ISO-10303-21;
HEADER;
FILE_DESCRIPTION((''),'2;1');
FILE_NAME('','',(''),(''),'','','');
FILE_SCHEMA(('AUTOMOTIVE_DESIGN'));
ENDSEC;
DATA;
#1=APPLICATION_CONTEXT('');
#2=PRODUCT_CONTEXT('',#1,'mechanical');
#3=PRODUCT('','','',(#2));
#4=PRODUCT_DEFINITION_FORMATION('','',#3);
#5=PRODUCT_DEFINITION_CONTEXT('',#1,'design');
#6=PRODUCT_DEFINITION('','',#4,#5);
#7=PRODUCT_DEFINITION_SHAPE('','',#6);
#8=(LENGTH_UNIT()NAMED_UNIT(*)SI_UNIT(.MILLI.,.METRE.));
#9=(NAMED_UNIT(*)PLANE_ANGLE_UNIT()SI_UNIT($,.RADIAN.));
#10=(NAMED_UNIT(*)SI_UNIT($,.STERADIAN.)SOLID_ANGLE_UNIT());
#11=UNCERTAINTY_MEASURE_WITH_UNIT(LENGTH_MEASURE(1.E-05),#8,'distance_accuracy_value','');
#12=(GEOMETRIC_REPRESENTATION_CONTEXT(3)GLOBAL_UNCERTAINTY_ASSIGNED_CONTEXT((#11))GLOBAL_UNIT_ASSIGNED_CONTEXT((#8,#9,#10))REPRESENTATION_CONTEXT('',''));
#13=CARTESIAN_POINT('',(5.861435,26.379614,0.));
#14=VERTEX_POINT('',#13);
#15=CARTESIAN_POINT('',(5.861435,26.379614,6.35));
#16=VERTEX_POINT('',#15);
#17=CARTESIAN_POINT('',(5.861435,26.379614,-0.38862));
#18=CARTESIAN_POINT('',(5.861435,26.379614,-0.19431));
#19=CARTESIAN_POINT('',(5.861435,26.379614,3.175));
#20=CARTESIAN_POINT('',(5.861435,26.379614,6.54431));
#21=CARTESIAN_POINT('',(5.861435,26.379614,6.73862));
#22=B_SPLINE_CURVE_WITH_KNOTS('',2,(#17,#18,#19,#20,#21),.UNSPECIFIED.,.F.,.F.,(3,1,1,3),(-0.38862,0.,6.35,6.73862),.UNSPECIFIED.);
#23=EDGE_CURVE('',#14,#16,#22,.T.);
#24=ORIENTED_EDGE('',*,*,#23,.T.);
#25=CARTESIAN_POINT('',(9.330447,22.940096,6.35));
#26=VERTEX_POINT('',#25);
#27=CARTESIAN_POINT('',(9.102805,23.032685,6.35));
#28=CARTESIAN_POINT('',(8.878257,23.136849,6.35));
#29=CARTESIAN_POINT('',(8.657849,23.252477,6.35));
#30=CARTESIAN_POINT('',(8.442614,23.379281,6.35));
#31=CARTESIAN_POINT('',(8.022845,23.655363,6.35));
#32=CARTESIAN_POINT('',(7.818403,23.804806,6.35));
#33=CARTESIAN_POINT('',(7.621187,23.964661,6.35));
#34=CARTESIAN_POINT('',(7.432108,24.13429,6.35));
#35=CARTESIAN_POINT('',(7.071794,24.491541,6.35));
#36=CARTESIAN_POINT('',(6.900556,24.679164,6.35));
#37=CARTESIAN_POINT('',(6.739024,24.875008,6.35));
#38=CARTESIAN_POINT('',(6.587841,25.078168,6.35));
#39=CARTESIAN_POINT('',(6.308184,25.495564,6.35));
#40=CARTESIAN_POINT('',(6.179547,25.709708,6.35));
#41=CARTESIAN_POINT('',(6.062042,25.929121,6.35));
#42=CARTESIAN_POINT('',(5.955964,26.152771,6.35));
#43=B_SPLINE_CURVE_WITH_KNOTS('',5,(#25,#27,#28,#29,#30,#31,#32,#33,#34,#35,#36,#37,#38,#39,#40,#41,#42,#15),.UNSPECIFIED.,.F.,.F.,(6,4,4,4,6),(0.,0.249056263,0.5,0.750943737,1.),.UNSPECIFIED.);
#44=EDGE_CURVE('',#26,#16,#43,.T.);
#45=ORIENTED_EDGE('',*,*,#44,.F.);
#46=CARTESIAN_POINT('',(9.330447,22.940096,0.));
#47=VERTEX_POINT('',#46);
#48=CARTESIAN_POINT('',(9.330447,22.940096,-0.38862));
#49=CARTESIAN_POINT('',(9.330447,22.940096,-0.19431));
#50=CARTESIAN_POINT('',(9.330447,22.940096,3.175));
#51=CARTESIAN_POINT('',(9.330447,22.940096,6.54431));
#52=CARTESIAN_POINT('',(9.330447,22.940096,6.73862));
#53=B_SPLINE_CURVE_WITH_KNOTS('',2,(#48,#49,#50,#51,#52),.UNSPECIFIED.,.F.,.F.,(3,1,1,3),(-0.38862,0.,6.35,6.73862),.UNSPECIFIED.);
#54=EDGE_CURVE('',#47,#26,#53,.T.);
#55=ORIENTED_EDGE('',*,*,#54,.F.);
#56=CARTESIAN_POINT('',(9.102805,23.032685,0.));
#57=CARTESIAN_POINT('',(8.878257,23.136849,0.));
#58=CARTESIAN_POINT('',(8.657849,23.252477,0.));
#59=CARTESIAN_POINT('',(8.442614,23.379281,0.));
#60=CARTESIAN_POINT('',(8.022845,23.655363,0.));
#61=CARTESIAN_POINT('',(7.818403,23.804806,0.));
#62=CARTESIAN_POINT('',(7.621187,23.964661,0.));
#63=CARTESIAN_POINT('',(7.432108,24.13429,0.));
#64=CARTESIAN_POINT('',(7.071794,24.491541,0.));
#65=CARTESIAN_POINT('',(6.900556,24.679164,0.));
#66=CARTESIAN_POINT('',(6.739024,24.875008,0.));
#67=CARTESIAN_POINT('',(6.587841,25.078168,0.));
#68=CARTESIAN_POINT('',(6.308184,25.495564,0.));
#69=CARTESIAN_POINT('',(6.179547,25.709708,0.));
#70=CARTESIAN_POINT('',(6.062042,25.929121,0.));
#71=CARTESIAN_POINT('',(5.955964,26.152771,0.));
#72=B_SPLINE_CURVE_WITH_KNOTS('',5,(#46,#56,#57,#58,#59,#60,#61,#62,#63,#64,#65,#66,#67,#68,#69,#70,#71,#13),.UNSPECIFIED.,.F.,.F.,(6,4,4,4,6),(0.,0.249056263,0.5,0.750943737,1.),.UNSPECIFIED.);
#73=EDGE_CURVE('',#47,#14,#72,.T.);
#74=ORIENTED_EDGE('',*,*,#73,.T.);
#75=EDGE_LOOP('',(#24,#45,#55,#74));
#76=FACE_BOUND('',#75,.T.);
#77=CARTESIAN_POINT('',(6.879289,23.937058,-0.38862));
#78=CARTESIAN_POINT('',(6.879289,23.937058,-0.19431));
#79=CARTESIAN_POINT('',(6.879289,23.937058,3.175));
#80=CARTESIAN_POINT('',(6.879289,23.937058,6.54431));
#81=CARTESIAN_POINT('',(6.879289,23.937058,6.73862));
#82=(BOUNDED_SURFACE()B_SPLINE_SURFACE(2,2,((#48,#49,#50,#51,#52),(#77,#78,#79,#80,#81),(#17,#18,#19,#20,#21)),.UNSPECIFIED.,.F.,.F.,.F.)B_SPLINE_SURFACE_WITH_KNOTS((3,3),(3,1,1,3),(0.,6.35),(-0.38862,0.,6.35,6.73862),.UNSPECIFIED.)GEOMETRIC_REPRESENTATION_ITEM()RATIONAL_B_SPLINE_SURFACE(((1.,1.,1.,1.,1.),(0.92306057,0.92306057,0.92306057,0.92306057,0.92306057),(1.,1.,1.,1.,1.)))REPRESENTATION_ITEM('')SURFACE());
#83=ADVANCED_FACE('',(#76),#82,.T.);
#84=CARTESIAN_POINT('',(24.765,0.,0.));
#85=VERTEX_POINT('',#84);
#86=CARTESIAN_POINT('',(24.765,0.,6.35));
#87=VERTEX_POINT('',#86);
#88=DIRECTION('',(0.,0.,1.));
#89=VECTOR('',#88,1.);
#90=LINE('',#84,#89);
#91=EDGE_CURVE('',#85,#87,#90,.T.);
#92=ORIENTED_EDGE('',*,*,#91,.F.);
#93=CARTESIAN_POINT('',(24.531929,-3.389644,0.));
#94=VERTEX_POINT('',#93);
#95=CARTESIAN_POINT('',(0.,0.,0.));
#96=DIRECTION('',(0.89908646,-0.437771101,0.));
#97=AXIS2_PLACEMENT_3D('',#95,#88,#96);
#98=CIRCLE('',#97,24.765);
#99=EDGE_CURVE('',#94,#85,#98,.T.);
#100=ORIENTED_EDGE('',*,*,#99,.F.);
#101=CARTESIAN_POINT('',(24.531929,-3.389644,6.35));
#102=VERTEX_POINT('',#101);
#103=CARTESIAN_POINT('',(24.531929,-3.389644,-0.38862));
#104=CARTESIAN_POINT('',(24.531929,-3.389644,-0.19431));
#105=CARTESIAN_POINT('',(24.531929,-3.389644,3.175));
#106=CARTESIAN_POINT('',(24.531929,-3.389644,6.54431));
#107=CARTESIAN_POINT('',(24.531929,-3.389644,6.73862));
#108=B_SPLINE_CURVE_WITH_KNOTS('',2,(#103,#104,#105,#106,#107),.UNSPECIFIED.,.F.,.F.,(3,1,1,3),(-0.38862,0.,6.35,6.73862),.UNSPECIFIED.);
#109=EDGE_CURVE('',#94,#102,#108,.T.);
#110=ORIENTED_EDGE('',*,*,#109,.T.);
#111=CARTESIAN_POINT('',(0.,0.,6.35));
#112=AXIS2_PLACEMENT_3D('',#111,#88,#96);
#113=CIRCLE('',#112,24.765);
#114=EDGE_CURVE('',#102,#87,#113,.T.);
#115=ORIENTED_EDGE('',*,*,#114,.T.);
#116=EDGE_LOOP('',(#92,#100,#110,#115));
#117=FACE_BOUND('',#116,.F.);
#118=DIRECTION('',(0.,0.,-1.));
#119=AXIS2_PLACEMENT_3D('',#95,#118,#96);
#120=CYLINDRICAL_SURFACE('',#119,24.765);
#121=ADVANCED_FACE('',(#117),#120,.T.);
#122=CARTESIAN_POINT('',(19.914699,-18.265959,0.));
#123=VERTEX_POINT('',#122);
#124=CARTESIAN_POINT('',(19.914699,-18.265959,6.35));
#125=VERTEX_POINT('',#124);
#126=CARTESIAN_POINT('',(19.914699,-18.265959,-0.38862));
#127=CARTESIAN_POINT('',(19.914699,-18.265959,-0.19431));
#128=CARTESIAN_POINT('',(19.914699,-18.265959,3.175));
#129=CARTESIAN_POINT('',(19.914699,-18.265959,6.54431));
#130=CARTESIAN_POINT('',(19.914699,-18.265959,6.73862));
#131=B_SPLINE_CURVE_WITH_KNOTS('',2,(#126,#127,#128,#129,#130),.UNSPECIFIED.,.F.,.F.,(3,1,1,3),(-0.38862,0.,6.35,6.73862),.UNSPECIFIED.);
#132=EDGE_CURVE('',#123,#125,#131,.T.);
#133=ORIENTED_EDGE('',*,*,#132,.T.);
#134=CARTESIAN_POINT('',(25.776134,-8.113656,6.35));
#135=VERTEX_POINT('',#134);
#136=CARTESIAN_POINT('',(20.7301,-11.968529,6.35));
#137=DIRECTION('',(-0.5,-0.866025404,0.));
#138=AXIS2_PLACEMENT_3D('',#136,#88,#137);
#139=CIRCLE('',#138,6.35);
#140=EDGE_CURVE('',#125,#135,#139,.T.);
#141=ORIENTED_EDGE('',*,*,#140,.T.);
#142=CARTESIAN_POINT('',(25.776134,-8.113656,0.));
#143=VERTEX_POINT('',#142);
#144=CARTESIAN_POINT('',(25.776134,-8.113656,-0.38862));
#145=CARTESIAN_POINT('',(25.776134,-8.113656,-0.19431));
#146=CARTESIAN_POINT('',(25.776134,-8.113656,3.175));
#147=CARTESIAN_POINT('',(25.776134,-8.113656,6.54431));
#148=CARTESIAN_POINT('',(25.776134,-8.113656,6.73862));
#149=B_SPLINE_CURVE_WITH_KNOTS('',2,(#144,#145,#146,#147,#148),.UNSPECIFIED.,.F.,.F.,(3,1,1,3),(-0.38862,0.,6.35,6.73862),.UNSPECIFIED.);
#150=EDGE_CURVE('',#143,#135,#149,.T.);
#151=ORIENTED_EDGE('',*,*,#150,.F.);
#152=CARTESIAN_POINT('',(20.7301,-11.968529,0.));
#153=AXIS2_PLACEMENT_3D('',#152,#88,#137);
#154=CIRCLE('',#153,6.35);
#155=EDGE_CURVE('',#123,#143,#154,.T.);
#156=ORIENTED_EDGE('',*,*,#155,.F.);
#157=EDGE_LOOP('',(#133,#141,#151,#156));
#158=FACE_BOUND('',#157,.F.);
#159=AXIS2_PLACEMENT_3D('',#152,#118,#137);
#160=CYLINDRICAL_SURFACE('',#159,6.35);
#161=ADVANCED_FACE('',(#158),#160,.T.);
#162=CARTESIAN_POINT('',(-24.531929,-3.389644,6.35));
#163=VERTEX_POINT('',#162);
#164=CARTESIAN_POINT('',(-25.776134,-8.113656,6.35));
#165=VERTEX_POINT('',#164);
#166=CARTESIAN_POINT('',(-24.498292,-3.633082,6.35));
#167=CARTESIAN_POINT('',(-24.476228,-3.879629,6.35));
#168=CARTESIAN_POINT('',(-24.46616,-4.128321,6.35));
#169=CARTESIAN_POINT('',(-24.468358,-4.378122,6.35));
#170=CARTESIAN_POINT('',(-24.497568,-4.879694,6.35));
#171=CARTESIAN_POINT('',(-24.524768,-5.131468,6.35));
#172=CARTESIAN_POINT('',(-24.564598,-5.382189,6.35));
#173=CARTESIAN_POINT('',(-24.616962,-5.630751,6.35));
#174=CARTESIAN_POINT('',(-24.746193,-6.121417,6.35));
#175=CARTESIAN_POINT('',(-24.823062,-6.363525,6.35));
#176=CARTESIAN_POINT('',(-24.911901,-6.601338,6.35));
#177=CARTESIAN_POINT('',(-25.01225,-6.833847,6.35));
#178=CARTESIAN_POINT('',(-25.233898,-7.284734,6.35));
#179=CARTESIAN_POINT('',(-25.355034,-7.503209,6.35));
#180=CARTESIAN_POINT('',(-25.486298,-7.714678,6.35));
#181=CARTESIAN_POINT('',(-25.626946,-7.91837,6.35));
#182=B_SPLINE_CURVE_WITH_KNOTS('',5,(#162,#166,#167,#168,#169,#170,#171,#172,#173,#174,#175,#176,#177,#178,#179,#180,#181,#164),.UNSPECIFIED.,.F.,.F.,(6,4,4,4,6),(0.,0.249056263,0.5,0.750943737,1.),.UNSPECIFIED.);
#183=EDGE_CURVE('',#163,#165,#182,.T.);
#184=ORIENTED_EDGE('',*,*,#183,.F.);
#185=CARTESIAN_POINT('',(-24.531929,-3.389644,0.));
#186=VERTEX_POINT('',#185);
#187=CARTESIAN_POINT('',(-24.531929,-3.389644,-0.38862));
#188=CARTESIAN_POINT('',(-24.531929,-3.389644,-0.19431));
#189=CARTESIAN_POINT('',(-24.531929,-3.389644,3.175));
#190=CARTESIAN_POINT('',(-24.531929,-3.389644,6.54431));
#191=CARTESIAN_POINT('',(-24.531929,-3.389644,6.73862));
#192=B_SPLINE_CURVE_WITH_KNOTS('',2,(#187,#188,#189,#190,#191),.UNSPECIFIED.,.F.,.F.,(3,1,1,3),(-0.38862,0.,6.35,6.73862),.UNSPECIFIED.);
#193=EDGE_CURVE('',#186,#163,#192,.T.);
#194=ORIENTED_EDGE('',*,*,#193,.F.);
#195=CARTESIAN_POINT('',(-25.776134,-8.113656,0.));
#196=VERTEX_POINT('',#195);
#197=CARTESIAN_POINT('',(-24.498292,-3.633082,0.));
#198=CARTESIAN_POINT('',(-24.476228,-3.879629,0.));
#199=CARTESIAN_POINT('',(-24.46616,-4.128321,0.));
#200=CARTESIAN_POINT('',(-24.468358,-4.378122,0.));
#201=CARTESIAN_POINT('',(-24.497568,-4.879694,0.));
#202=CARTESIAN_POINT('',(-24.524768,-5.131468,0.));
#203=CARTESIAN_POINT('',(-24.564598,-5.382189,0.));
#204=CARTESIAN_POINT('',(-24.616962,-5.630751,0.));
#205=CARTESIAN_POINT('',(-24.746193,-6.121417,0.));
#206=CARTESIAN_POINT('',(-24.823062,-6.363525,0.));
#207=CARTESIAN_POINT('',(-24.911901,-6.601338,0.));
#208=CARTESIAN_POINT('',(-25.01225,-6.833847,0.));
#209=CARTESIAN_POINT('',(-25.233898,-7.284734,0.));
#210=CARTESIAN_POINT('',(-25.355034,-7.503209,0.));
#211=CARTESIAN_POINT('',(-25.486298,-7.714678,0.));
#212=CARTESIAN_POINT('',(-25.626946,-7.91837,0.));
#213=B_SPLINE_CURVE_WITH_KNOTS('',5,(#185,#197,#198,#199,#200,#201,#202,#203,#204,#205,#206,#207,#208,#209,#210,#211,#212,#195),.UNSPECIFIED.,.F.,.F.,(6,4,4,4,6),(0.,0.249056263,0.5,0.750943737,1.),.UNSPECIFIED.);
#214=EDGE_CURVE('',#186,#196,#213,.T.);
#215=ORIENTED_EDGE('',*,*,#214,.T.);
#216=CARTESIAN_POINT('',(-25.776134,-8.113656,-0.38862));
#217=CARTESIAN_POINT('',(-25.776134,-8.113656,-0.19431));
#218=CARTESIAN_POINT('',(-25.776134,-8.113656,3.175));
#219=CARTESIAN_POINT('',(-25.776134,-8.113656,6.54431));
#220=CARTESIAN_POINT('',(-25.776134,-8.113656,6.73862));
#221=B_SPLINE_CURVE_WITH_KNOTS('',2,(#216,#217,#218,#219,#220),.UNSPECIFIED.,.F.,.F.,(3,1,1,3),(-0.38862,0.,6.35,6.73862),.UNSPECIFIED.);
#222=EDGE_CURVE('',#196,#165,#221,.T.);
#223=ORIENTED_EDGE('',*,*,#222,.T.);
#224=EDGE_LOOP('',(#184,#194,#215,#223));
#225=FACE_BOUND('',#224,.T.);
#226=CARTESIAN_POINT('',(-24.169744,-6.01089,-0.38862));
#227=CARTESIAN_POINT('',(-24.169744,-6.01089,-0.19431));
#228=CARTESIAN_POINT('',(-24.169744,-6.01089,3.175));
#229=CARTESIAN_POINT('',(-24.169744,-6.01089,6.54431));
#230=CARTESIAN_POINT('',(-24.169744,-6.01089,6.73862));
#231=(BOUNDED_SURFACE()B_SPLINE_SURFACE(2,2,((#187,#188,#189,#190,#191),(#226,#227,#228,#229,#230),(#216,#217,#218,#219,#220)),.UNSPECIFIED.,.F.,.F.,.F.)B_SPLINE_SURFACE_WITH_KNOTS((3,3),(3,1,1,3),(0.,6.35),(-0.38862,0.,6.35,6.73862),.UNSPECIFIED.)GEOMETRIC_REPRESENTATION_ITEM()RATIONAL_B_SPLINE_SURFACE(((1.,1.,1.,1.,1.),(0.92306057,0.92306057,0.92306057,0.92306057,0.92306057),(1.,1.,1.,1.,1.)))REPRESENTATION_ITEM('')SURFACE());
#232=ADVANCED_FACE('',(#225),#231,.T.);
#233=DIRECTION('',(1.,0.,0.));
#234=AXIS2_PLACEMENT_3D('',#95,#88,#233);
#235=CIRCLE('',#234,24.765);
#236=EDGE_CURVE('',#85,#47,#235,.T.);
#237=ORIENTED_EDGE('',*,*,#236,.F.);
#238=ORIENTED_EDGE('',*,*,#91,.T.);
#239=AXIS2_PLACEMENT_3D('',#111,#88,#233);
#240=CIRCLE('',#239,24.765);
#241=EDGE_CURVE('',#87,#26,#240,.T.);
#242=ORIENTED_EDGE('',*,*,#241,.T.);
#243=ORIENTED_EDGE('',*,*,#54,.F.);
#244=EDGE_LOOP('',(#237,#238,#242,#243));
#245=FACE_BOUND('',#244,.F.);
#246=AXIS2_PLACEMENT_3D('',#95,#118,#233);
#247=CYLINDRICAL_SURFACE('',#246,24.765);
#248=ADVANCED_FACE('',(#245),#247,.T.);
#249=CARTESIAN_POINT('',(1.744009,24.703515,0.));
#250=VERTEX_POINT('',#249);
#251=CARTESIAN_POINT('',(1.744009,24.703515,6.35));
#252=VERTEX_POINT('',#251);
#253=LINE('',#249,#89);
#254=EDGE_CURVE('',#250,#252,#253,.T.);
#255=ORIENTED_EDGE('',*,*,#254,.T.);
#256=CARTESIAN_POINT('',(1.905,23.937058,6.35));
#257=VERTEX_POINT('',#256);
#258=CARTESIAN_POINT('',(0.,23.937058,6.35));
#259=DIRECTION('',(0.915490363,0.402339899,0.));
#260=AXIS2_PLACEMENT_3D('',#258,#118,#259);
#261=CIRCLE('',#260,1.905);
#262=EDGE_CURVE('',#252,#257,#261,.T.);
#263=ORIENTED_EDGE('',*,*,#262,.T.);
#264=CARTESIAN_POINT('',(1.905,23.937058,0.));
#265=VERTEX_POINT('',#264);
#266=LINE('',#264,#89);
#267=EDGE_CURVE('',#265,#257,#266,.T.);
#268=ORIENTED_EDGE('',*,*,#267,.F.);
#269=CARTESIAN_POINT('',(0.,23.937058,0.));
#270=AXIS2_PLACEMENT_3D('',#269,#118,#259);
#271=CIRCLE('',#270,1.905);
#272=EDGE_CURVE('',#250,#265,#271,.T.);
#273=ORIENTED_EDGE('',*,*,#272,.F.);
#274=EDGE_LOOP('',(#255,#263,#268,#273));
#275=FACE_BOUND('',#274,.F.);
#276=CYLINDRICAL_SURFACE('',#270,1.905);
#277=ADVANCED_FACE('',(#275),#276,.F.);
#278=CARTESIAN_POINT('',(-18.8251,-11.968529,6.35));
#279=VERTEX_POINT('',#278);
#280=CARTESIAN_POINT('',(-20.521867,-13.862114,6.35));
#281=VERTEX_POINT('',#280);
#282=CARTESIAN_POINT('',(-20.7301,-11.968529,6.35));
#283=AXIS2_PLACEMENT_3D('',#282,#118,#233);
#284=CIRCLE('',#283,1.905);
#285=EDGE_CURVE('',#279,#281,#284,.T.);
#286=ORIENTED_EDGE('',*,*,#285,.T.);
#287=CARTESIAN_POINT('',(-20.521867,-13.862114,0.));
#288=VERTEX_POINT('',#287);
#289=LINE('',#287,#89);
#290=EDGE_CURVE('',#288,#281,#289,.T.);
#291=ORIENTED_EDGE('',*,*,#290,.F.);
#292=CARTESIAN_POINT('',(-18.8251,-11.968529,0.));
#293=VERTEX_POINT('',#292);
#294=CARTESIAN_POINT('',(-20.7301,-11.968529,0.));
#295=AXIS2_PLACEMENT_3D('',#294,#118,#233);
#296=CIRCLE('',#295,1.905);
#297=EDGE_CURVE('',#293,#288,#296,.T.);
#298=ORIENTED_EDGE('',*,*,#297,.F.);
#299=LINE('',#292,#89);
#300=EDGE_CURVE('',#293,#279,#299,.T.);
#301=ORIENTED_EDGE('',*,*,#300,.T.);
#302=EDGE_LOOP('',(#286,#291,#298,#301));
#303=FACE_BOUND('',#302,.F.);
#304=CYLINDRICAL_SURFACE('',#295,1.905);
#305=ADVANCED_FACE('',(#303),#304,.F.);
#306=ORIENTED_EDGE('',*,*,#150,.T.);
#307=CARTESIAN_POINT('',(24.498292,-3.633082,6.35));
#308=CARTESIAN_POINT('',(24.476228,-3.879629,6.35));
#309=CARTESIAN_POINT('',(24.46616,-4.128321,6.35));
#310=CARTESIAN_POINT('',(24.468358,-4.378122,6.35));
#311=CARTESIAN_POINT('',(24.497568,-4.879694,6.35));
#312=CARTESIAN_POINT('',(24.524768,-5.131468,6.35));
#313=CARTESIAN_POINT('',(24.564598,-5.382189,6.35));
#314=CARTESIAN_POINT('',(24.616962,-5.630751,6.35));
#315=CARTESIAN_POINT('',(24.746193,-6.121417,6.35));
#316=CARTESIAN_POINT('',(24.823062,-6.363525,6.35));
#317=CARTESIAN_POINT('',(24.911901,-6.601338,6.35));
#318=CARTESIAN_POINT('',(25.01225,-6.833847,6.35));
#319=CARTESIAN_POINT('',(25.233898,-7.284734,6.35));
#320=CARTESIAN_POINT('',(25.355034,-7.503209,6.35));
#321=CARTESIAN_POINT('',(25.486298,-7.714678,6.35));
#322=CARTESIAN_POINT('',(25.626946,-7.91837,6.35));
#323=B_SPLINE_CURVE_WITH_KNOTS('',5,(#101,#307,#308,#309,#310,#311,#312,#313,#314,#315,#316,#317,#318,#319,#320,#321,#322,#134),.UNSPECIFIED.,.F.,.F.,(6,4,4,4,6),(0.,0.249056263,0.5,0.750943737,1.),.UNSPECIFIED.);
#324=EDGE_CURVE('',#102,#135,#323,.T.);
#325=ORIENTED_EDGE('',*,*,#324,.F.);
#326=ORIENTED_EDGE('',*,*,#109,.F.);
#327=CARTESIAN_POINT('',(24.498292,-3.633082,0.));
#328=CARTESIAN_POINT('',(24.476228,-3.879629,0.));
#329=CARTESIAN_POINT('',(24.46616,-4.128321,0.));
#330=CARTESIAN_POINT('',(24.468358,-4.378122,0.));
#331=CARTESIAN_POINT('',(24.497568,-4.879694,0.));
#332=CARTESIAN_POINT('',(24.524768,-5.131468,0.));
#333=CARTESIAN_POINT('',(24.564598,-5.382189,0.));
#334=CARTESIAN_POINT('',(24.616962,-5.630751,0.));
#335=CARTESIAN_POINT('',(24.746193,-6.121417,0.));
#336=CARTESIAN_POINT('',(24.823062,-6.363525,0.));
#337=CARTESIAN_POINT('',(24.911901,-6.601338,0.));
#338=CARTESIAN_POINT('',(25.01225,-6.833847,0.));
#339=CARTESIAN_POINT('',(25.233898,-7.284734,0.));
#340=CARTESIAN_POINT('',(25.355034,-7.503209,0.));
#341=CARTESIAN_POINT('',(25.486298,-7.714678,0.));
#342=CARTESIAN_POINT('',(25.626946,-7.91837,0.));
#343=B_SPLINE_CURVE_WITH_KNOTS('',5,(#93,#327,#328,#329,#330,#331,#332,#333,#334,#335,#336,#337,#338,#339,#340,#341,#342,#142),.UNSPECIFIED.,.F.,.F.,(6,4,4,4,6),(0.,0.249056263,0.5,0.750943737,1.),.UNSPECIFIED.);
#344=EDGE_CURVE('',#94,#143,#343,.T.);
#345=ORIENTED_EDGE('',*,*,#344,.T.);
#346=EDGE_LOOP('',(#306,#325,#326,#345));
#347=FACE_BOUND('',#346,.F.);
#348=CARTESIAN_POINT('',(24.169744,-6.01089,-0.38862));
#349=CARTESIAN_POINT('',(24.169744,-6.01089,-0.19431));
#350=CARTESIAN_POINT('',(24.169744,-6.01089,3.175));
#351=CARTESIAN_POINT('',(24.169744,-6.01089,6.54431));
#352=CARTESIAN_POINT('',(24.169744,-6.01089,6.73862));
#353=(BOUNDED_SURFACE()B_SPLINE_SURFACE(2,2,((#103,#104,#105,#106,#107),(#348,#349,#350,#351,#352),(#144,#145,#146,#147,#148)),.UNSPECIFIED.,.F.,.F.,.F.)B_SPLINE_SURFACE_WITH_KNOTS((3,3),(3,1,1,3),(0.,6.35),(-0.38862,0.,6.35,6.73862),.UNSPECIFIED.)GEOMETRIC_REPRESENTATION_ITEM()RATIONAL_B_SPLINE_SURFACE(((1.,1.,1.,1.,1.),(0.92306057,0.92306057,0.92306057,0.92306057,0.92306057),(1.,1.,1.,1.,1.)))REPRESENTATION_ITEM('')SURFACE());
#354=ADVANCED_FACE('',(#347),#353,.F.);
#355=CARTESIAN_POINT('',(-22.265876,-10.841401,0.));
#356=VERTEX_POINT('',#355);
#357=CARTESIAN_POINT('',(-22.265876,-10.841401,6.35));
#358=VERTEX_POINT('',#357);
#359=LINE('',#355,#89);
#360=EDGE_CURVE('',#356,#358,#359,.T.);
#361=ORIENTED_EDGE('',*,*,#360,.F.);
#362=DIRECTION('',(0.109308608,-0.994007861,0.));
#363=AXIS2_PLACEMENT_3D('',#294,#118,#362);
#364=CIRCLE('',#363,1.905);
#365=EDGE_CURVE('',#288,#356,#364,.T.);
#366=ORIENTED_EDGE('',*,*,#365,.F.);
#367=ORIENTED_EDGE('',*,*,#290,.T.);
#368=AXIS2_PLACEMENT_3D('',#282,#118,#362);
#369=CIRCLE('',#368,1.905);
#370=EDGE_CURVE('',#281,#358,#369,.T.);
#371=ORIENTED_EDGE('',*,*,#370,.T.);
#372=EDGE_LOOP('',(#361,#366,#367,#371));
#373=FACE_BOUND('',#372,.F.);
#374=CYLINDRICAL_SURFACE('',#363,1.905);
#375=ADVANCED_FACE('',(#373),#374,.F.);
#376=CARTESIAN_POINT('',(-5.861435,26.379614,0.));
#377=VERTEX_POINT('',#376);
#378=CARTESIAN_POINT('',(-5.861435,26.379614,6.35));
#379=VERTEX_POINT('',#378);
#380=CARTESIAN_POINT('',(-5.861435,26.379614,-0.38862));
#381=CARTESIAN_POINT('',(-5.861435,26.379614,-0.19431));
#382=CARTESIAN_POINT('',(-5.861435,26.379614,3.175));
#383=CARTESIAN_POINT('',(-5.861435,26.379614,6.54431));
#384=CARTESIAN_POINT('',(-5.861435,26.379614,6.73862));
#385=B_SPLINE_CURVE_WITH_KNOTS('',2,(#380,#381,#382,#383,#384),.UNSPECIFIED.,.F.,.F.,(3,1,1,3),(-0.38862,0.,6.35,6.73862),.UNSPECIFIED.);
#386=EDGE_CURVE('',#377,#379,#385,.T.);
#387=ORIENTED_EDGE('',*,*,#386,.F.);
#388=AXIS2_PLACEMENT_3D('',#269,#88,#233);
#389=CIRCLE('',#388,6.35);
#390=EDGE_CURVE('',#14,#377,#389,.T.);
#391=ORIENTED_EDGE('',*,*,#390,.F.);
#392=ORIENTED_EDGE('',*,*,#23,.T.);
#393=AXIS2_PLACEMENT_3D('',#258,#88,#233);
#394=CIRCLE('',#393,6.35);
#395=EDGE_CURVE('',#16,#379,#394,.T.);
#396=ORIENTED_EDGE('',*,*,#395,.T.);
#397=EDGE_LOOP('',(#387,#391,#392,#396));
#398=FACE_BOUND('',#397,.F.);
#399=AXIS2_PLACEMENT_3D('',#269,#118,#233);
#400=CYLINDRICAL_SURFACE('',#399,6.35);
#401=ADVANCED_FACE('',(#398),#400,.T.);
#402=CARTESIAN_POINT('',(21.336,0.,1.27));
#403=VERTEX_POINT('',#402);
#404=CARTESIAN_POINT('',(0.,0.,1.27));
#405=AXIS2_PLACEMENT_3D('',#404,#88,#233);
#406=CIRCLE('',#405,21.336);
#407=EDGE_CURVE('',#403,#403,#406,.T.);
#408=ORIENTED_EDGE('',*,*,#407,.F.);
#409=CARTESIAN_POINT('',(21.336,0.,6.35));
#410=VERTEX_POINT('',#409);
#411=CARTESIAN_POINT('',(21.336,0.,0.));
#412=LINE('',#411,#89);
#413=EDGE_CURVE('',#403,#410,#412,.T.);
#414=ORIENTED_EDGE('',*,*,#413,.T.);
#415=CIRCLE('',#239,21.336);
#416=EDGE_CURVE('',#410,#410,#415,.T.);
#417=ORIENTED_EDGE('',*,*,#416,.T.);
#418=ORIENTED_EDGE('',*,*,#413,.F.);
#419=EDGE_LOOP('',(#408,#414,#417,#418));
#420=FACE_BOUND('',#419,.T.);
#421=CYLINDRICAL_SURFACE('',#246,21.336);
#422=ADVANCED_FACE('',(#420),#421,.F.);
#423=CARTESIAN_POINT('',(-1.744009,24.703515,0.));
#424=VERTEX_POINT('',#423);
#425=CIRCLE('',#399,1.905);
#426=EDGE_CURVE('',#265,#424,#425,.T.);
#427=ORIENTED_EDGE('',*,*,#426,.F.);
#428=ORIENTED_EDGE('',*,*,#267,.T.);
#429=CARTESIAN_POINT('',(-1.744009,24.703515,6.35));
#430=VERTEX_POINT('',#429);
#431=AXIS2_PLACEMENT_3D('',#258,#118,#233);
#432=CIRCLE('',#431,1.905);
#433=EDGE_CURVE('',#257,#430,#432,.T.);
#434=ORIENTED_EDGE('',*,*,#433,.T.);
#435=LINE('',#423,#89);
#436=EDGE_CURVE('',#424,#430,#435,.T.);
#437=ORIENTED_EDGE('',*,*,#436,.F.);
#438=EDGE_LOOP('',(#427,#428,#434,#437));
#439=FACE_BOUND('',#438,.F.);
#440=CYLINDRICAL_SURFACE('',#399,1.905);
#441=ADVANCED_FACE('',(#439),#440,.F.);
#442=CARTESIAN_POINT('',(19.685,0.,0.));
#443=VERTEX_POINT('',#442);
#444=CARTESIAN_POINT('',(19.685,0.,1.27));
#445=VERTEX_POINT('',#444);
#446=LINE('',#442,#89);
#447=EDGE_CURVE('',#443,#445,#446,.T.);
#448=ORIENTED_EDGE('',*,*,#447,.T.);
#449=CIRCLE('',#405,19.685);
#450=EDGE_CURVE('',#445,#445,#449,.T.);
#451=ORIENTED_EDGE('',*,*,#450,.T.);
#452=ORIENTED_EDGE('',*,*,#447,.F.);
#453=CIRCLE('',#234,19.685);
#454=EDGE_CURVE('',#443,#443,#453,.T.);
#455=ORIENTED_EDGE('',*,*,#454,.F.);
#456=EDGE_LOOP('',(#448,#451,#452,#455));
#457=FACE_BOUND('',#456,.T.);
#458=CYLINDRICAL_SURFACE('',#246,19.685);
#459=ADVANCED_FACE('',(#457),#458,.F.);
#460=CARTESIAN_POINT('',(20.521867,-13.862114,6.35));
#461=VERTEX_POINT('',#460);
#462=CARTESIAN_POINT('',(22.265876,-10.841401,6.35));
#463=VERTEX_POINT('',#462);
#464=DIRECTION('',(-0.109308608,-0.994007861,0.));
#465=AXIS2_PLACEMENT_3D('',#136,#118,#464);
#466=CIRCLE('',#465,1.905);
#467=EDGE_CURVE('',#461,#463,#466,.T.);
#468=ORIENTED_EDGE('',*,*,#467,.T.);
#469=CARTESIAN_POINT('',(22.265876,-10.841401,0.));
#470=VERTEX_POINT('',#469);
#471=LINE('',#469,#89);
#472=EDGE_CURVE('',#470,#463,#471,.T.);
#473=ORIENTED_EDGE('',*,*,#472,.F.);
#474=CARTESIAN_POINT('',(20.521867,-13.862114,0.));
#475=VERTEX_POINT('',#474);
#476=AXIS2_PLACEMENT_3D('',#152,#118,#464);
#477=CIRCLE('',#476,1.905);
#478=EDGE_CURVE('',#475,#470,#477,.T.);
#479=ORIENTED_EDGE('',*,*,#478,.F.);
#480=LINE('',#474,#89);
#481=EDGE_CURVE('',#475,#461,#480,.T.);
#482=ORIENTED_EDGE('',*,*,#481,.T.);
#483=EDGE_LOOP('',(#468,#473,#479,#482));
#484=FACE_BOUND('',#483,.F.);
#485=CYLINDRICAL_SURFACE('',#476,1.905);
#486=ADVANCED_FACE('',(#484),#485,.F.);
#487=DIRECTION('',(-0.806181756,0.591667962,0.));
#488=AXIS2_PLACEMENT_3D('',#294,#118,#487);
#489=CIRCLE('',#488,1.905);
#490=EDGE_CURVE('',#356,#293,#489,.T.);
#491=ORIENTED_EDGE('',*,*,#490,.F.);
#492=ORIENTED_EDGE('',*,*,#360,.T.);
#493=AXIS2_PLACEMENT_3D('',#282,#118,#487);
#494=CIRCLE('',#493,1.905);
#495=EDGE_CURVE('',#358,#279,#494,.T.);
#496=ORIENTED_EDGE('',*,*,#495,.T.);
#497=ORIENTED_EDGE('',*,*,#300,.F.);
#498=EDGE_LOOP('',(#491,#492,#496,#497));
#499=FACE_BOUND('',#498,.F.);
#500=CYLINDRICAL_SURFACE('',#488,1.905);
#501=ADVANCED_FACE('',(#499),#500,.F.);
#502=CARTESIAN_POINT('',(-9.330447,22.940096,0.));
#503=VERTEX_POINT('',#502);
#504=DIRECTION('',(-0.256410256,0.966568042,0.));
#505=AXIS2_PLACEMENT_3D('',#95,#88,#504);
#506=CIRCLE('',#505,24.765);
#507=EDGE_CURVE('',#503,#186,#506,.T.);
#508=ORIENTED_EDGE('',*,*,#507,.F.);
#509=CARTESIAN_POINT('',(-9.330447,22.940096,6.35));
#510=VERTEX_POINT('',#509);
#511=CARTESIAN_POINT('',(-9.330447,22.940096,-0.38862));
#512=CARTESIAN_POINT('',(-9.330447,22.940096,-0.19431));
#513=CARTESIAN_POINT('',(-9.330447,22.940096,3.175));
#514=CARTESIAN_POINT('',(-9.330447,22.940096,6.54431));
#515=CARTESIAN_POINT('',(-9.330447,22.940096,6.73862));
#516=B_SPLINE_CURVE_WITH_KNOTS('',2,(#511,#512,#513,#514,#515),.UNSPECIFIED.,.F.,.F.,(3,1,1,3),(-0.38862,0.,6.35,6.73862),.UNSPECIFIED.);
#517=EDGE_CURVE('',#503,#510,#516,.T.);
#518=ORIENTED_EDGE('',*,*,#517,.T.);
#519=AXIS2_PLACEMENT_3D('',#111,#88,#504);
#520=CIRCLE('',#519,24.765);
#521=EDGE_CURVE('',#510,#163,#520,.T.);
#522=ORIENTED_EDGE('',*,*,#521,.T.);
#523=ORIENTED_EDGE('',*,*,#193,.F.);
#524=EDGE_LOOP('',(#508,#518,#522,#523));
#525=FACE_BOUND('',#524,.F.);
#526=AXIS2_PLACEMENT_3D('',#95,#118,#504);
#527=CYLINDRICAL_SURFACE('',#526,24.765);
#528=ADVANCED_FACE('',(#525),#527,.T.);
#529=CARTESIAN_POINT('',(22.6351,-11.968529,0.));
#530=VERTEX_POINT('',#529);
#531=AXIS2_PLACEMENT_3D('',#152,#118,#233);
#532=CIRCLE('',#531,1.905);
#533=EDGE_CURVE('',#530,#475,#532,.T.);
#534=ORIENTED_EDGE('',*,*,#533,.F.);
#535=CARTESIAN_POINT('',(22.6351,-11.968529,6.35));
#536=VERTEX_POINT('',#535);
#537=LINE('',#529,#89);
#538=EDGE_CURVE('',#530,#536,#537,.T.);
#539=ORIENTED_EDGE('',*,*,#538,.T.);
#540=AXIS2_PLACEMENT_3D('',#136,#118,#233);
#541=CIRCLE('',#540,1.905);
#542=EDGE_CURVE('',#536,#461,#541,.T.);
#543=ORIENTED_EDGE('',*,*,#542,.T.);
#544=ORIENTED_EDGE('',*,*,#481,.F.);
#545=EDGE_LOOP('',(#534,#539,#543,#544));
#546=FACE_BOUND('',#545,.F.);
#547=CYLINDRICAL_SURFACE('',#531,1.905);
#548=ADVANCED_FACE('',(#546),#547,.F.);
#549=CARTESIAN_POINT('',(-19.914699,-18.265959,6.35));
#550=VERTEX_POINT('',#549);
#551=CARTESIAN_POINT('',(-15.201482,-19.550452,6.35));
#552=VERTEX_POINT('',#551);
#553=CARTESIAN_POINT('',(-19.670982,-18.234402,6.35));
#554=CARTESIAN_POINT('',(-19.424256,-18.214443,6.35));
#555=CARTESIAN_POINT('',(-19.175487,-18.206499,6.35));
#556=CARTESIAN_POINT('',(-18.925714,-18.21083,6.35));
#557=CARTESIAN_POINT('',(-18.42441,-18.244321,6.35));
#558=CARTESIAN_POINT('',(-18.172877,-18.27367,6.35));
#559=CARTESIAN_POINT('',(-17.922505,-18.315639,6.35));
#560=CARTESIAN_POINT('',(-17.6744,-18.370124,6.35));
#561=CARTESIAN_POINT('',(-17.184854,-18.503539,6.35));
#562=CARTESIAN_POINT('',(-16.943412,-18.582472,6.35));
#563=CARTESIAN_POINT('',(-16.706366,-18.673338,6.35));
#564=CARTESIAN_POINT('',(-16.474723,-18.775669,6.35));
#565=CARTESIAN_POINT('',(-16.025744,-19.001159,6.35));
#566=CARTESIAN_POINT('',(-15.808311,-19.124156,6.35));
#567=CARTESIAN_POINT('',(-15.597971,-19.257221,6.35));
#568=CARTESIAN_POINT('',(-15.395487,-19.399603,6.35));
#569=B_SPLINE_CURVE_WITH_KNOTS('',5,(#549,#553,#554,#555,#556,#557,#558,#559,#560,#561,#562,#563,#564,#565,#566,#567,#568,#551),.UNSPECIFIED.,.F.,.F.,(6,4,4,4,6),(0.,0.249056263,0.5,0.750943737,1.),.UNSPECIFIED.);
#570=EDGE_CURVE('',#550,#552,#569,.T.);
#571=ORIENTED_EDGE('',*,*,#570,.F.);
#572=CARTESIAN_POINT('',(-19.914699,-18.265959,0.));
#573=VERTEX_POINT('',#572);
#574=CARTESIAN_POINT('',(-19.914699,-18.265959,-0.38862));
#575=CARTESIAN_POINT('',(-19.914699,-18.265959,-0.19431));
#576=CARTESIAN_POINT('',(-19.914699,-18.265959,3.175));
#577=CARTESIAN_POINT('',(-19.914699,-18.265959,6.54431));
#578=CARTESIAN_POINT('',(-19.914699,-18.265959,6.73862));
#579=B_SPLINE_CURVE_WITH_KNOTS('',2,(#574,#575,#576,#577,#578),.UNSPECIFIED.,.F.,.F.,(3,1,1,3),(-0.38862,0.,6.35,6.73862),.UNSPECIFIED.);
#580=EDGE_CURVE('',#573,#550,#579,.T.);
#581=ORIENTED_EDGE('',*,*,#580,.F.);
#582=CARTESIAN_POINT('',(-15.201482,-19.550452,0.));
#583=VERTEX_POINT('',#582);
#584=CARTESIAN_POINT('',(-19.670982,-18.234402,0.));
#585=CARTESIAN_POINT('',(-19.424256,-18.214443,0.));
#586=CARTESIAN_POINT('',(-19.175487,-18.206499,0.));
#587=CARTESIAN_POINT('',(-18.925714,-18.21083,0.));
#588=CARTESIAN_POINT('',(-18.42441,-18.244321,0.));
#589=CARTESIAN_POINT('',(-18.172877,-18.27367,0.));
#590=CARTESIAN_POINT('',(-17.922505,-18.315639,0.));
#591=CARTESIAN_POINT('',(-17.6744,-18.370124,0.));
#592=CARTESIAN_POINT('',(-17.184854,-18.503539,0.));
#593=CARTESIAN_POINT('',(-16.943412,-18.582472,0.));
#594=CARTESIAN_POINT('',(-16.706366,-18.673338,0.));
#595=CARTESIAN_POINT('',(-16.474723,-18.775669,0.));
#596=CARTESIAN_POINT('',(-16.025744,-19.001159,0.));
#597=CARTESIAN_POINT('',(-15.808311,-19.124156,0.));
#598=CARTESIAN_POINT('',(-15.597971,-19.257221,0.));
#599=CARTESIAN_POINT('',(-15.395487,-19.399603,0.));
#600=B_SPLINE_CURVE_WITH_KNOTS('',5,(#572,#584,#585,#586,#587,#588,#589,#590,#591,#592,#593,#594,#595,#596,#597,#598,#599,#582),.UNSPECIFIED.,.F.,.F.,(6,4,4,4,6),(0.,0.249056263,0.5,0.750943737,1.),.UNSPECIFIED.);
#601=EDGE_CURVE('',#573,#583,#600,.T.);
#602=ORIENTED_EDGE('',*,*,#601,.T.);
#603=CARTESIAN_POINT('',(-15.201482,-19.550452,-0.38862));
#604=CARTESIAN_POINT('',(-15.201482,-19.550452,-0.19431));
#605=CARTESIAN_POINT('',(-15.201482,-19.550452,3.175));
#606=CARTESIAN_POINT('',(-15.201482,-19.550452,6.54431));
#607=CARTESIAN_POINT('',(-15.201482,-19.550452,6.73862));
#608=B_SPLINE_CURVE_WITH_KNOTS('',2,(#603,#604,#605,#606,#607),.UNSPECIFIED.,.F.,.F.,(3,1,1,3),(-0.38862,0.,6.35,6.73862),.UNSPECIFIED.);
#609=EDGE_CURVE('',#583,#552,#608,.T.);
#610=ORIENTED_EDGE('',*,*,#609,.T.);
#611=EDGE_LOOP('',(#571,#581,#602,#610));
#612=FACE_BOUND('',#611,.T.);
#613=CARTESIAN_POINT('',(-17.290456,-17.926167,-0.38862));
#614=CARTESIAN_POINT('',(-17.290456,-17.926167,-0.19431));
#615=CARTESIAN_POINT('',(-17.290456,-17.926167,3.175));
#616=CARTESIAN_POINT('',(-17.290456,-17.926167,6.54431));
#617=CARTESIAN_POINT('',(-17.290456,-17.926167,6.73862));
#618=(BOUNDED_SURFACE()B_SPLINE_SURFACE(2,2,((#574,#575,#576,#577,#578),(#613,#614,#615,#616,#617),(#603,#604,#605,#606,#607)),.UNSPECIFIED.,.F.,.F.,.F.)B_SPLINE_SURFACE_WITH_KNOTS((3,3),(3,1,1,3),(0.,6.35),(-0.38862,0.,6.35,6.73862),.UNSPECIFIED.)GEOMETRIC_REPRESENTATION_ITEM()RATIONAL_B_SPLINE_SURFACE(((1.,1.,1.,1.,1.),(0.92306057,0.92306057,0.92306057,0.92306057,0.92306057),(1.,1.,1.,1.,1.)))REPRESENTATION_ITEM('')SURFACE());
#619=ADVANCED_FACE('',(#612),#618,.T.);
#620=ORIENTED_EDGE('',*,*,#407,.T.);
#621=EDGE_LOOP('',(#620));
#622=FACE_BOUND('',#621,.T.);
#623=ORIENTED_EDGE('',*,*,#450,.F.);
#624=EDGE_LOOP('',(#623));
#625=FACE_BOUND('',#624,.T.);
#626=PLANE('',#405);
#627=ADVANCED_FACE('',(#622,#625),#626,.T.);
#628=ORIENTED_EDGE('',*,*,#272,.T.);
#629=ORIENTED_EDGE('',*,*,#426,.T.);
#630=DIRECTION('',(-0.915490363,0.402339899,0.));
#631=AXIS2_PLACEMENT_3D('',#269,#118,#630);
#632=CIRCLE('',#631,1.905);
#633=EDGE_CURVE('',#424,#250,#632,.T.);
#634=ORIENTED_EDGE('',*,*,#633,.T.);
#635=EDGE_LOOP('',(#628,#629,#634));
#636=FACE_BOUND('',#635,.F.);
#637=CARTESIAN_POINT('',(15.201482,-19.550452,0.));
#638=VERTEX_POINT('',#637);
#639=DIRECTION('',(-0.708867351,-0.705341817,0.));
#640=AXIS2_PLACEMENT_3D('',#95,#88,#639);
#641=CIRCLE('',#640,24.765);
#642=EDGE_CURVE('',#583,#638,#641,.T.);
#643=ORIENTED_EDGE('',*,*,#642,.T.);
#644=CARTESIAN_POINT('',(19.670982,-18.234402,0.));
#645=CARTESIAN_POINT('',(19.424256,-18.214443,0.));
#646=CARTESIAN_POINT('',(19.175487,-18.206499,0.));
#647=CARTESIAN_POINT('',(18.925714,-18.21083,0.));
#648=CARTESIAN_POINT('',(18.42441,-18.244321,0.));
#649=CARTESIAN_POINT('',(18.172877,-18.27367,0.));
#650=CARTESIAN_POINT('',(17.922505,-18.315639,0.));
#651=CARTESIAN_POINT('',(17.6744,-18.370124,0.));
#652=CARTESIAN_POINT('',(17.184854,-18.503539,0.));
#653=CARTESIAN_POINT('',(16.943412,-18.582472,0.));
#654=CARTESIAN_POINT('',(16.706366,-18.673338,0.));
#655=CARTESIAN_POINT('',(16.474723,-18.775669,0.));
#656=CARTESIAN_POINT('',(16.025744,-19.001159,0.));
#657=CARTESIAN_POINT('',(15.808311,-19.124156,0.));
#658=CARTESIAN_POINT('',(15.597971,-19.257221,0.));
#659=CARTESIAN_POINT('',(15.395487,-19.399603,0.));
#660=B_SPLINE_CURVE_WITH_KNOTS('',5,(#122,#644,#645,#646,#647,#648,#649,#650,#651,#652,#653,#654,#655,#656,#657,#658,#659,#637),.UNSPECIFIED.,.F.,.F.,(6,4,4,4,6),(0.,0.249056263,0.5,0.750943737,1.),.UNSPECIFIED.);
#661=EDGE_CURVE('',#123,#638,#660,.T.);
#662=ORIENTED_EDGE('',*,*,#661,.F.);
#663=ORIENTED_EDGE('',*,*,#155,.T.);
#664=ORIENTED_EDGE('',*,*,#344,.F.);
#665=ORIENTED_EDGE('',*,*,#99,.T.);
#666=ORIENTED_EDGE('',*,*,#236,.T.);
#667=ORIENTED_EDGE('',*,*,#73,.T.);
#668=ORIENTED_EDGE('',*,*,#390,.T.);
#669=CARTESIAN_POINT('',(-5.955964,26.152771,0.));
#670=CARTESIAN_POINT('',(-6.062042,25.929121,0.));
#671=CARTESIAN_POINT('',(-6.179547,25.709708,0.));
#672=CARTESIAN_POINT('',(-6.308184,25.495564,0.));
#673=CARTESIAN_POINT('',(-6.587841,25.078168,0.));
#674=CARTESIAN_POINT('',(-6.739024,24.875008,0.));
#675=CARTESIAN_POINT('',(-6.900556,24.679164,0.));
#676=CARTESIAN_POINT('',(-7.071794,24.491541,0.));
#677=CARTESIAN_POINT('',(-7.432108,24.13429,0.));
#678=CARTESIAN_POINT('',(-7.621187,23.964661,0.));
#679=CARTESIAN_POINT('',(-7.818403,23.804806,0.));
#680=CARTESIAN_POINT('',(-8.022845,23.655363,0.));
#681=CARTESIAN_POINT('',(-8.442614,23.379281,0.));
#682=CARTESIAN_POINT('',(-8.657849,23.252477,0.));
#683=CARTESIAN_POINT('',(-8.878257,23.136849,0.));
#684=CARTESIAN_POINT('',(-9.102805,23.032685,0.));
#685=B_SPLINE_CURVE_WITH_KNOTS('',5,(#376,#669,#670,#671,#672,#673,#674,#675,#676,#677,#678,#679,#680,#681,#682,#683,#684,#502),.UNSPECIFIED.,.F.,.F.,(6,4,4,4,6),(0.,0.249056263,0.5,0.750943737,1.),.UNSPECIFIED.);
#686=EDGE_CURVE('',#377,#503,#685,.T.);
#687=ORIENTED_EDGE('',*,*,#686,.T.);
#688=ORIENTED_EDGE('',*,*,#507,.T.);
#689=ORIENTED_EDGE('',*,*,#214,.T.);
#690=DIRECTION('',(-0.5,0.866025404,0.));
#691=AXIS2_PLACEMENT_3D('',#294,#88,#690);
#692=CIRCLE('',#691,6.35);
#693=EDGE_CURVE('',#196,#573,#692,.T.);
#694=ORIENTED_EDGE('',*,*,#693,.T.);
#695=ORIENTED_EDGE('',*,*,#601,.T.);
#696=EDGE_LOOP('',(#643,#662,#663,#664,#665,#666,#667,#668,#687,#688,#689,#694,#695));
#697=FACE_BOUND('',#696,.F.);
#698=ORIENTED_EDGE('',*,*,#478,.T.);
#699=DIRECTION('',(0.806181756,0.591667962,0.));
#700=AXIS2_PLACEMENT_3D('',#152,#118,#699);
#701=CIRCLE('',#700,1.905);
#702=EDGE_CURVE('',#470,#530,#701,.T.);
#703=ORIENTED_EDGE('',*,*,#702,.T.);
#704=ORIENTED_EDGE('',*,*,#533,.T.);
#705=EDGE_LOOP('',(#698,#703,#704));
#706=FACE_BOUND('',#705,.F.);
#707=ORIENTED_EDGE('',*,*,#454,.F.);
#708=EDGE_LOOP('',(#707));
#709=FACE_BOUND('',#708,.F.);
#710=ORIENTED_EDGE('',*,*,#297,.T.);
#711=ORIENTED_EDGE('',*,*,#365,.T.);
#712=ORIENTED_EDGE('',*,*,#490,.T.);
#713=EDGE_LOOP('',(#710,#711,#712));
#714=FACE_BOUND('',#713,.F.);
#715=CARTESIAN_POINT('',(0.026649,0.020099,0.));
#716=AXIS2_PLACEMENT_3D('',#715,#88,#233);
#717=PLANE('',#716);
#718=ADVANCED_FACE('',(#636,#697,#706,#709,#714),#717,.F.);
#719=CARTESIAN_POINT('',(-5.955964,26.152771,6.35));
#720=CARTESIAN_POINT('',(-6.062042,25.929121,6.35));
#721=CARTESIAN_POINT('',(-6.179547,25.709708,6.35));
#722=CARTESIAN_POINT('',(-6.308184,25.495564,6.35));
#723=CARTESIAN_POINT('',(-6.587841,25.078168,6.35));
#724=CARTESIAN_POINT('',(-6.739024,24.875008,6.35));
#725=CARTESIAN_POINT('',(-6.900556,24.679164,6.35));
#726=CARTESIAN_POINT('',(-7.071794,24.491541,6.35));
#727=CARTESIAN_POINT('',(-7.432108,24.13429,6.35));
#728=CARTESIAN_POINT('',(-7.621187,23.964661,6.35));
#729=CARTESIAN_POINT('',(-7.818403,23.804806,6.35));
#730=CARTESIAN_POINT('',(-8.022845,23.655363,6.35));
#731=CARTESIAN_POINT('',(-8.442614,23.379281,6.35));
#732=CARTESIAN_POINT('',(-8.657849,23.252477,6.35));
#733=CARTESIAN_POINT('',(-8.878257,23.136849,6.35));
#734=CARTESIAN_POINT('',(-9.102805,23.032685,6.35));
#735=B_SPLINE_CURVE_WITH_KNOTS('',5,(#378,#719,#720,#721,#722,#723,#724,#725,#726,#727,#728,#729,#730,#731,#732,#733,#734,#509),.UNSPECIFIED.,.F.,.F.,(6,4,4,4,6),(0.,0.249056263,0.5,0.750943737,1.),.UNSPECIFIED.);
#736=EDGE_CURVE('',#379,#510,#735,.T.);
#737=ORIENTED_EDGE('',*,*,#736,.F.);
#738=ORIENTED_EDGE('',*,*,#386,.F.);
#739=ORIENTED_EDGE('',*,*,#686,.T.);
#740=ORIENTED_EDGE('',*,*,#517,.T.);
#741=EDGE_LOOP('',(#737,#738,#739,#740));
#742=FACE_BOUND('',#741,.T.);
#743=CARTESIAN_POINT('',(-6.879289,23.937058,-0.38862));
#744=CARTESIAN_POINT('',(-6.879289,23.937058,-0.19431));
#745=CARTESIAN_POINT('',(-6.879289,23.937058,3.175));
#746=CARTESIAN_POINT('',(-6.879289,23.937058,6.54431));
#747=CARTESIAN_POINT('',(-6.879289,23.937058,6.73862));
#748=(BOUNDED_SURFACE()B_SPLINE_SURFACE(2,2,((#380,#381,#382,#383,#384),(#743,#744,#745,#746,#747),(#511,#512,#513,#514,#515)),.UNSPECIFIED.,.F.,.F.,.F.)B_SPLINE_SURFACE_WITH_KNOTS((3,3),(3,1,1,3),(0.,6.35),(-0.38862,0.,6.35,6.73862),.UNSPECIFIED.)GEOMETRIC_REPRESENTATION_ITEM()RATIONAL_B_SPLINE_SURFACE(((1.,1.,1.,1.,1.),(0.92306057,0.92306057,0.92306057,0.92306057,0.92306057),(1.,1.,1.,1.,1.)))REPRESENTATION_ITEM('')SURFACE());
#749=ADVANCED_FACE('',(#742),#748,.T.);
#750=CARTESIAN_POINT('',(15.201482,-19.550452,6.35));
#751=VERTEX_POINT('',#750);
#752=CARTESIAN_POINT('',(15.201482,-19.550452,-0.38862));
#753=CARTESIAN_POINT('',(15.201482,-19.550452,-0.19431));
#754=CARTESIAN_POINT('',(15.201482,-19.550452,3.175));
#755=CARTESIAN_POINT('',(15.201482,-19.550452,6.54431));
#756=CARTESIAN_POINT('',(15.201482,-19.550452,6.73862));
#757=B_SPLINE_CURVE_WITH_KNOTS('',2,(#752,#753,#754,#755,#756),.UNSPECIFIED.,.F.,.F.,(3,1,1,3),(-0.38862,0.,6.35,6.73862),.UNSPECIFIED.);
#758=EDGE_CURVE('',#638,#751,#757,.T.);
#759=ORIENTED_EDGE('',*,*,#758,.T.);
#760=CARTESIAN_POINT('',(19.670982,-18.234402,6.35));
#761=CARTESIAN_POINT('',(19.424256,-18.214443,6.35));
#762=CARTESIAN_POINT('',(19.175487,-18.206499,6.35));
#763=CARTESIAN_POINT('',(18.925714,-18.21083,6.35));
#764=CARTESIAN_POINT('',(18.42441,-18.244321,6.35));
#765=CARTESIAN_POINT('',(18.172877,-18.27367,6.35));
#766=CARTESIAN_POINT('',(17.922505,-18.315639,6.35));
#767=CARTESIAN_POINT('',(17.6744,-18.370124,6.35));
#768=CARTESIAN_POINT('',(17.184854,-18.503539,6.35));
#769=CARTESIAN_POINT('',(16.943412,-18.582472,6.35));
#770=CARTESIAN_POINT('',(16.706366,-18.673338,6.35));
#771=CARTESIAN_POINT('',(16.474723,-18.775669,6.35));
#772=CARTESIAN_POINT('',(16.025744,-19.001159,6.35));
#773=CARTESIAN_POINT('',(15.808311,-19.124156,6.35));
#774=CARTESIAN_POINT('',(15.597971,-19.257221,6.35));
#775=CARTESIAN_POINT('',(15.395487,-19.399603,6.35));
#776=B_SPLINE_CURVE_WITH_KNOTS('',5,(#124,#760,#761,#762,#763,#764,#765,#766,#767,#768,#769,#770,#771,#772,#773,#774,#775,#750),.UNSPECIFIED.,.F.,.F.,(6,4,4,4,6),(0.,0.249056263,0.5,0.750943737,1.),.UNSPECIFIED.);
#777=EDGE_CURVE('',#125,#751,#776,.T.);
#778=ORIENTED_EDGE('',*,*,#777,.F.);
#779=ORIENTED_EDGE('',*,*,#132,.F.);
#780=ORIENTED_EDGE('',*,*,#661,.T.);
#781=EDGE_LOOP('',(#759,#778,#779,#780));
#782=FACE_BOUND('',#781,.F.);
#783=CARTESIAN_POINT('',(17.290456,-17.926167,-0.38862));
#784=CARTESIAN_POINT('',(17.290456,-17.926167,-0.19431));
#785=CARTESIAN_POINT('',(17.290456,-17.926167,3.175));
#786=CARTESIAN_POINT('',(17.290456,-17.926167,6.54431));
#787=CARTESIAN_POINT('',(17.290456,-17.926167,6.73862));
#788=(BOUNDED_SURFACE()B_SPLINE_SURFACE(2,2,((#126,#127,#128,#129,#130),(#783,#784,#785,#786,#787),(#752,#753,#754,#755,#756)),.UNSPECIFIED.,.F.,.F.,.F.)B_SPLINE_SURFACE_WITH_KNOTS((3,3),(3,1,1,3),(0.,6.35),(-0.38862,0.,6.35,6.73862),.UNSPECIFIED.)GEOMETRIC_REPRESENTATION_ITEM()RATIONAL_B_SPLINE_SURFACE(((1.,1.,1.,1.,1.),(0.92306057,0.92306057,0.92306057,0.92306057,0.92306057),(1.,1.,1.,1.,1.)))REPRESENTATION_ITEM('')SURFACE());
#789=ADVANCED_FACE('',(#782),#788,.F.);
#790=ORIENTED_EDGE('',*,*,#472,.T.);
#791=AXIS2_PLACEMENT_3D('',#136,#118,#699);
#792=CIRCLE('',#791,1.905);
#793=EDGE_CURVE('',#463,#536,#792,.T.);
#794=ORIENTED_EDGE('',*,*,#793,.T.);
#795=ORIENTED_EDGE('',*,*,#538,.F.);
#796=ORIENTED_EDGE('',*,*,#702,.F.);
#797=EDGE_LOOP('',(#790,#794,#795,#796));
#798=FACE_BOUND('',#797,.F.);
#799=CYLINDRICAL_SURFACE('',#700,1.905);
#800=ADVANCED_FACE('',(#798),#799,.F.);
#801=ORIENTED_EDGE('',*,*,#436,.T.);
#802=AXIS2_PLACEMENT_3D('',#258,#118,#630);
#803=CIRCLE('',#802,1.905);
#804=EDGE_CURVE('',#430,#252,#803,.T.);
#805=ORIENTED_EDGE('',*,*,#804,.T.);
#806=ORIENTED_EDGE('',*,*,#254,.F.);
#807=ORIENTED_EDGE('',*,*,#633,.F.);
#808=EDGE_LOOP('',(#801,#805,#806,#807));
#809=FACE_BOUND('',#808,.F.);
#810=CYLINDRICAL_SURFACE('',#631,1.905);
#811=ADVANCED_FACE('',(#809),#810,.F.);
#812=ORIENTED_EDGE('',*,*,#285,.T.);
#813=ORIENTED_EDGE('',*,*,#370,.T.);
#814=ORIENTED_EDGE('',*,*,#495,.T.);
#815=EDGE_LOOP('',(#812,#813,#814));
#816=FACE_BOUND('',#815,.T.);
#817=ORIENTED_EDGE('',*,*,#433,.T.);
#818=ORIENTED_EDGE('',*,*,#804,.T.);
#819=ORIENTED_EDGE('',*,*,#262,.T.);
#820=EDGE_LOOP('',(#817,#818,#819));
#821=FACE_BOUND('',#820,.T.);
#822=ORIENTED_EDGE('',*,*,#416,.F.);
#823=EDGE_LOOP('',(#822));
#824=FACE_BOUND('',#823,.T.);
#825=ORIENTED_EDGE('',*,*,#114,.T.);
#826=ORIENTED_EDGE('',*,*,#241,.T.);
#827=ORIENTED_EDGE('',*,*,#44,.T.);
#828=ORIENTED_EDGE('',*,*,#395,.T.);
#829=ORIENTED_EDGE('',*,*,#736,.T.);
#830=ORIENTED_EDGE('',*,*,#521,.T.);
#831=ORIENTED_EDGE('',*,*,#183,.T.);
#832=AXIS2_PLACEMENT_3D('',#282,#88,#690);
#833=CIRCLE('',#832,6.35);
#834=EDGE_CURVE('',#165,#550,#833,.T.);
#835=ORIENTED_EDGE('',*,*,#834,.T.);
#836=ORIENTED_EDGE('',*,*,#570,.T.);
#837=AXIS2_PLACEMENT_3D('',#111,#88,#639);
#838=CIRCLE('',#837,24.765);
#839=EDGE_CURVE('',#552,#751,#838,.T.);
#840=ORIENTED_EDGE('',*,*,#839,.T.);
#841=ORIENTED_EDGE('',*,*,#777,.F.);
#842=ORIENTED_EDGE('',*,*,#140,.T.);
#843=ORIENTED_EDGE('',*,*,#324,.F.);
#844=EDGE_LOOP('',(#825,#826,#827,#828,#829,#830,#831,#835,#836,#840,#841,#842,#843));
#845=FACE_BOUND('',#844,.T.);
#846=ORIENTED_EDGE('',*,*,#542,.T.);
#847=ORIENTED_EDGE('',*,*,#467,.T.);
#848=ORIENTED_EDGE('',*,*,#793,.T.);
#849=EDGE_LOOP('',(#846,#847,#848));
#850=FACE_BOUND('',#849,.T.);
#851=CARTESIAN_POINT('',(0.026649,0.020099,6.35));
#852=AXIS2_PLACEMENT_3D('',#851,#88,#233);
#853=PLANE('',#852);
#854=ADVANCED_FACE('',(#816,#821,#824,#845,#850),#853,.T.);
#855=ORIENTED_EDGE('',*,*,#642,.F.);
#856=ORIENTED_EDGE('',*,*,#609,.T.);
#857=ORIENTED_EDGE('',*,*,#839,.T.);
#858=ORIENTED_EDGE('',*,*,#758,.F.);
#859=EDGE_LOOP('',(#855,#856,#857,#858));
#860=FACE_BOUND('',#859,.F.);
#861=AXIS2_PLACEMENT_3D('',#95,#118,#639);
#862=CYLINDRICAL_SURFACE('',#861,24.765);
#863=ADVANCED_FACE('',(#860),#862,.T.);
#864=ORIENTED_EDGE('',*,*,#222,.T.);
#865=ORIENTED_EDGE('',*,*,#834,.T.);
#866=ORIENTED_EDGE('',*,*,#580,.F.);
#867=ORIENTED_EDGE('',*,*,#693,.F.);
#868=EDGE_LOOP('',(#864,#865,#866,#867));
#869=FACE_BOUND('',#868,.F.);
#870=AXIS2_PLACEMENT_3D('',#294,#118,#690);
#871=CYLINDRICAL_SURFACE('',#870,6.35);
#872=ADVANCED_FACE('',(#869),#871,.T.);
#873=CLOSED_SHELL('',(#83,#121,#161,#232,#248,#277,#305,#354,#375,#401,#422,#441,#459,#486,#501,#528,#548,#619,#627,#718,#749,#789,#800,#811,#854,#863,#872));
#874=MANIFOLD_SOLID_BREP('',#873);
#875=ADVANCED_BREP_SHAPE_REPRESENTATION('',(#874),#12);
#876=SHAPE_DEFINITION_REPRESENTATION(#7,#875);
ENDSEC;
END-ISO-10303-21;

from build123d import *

# Parameters (mm, degrees)
F0_R     = 21.336
F0_R_2   = 19.685
F1_DEPTH = 1.27
F2_DEPTH = 6.35
F3_R     = 6.35


with BuildPart() as f1:
    # F0 (on Top) → F1 (new body)
    with BuildSketch(Plane.XY):
        Circle(F0_R)
        Circle(F0_R_2, mode=Mode.SUBTRACT)
    extrude(amount=F1_DEPTH)

    # F0 (on Top) → F2 (join)
    with BuildSketch(Plane.XY):
        with BuildLine():
            ThreePointArc((23.9050999455, -6.4692674698), (24.5490837421, -3.2630832697), (24.765, 0))
            ThreePointArc((24.765, 0), (19.6285885254, 15.1004548773), (6.35, 23.9370575677))
            ThreePointArc((6.35, 23.9370575677), (4.0651088886, 24.4290833787), (1.7440091422, 24.703515076))
            ThreePointArc((1.7440091422, 24.703515076), (1.8643178935, 24.3286489263), (1.905, 23.9370575677))
            ThreePointArc((1.905, 23.9370575677), (-0.3915913586, 22.0727396742), (-1.7440091422, 24.703515076))
            ThreePointArc((-1.7440091422, 24.703515076), (-4.0651088886, 24.4290833787), (-6.35, 23.9370575677))
            ThreePointArc((-6.35, 23.9370575677), (-21.4471191247, 12.3825), (-23.9050999455, -6.4692674698))
            ThreePointArc((-23.9050999455, -6.4692674698), (-23.1887612414, -8.6940541227), (-22.2658761897, -10.8414013165))
            ThreePointArc((-22.2658761897, -10.8414013165), (-20.1370690632, -10.1581864481), (-18.8250999455, -11.9685287839))
            ThreePointArc((-18.8250999455, -11.9685287839), (-19.3113489683, -13.239815795), (-20.5218670475, -13.8621137596))
            ThreePointArc((-20.5218670475, -13.8621137596), (-19.1236523528, -15.735029256), (-17.5550999455, -17.4677900979))
            ThreePointArc((-17.5550999455, -17.4677900979), (0, -24.765), (17.5550999455, -17.4677900979))
            ThreePointArc((17.5550999455, -17.4677900979), (19.1236523528, -15.735029256), (20.5218670475, -13.8621137596))
            ThreePointArc((20.5218670475, -13.8621137596), (19.0803215513, -11.0160287839), (22.2658761897, -10.8414013165))
            ThreePointArc((22.2658761897, -10.8414013165), (23.1887612414, -8.6940541227), (23.9050999455, -6.4692674698))
        make_face()
        Circle(F0_R, mode=Mode.SUBTRACT)
        with BuildLine():
            ThreePointArc((1.7440091422, 24.703515076), (4.0651088886, 24.4290833787), (6.35, 23.9370575677))
            ThreePointArc((6.35, 23.9370575677), (0, 30.2870575677), (-6.35, 23.9370575677))
            ThreePointArc((-6.35, 23.9370575677), (-4.0651088886, 24.4290833787), (-1.7440091422, 24.703515076))
            ThreePointArc((-1.7440091422, 24.703515076), (0, 25.8420575677), (1.7440091422, 24.703515076))
        make_face()
        with BuildLine():
            ThreePointArc((17.5550999455, -17.4677900979), (26.2293612595, -15.1435287839), (23.9050999455, -6.4692674698))
            ThreePointArc((23.9050999455, -6.4692674698), (23.1887612414, -8.6940541227), (22.2658761897, -10.8414013165))
            ThreePointArc((22.2658761897, -10.8414013165), (22.5404422812, -11.3754979015), (22.6350999455, -11.9685287839))
            ThreePointArc((22.6350999455, -11.9685287839), (22.0013869566, -13.3872797611), (20.5218670475, -13.8621137596))
            ThreePointArc((20.5218670475, -13.8621137596), (19.1236523528, -15.735029256), (17.5550999455, -17.4677900979))
        make_face()
        with BuildLine():
            ThreePointArc((-22.2658761897, -10.8414013165), (-23.1887612414, -8.6940541227), (-23.9050999455, -6.4692674698))
            ThreePointArc((-23.9050999455, -6.4692674698), (-26.2293612595, -15.1435287839), (-17.5550999455, -17.4677900979))
            ThreePointArc((-17.5550999455, -17.4677900979), (-19.1236523528, -15.735029256), (-20.5218670475, -13.8621137596))
            ThreePointArc((-20.5218670475, -13.8621137596), (-22.3798783397, -12.9210287839), (-22.2658761897, -10.8414013165))
        make_face()
    extrude(amount=F2_DEPTH)

    # F3
    f3_edges = [f1.edges().sort_by_distance(p)[0] for p in [
        (6.35, 23.937058, 3.175),
        (-23.9051, -6.469267, 3.175),
        (17.5551, -17.46779, 3.175),
        (23.9051, -6.469267, 3.175),
        (-6.35, 23.937058, 3.175),
        (-17.5551, -17.46779, 3.175),
    ]]
    fillet(f3_edges, radius=F3_R)


solid = f1.part
